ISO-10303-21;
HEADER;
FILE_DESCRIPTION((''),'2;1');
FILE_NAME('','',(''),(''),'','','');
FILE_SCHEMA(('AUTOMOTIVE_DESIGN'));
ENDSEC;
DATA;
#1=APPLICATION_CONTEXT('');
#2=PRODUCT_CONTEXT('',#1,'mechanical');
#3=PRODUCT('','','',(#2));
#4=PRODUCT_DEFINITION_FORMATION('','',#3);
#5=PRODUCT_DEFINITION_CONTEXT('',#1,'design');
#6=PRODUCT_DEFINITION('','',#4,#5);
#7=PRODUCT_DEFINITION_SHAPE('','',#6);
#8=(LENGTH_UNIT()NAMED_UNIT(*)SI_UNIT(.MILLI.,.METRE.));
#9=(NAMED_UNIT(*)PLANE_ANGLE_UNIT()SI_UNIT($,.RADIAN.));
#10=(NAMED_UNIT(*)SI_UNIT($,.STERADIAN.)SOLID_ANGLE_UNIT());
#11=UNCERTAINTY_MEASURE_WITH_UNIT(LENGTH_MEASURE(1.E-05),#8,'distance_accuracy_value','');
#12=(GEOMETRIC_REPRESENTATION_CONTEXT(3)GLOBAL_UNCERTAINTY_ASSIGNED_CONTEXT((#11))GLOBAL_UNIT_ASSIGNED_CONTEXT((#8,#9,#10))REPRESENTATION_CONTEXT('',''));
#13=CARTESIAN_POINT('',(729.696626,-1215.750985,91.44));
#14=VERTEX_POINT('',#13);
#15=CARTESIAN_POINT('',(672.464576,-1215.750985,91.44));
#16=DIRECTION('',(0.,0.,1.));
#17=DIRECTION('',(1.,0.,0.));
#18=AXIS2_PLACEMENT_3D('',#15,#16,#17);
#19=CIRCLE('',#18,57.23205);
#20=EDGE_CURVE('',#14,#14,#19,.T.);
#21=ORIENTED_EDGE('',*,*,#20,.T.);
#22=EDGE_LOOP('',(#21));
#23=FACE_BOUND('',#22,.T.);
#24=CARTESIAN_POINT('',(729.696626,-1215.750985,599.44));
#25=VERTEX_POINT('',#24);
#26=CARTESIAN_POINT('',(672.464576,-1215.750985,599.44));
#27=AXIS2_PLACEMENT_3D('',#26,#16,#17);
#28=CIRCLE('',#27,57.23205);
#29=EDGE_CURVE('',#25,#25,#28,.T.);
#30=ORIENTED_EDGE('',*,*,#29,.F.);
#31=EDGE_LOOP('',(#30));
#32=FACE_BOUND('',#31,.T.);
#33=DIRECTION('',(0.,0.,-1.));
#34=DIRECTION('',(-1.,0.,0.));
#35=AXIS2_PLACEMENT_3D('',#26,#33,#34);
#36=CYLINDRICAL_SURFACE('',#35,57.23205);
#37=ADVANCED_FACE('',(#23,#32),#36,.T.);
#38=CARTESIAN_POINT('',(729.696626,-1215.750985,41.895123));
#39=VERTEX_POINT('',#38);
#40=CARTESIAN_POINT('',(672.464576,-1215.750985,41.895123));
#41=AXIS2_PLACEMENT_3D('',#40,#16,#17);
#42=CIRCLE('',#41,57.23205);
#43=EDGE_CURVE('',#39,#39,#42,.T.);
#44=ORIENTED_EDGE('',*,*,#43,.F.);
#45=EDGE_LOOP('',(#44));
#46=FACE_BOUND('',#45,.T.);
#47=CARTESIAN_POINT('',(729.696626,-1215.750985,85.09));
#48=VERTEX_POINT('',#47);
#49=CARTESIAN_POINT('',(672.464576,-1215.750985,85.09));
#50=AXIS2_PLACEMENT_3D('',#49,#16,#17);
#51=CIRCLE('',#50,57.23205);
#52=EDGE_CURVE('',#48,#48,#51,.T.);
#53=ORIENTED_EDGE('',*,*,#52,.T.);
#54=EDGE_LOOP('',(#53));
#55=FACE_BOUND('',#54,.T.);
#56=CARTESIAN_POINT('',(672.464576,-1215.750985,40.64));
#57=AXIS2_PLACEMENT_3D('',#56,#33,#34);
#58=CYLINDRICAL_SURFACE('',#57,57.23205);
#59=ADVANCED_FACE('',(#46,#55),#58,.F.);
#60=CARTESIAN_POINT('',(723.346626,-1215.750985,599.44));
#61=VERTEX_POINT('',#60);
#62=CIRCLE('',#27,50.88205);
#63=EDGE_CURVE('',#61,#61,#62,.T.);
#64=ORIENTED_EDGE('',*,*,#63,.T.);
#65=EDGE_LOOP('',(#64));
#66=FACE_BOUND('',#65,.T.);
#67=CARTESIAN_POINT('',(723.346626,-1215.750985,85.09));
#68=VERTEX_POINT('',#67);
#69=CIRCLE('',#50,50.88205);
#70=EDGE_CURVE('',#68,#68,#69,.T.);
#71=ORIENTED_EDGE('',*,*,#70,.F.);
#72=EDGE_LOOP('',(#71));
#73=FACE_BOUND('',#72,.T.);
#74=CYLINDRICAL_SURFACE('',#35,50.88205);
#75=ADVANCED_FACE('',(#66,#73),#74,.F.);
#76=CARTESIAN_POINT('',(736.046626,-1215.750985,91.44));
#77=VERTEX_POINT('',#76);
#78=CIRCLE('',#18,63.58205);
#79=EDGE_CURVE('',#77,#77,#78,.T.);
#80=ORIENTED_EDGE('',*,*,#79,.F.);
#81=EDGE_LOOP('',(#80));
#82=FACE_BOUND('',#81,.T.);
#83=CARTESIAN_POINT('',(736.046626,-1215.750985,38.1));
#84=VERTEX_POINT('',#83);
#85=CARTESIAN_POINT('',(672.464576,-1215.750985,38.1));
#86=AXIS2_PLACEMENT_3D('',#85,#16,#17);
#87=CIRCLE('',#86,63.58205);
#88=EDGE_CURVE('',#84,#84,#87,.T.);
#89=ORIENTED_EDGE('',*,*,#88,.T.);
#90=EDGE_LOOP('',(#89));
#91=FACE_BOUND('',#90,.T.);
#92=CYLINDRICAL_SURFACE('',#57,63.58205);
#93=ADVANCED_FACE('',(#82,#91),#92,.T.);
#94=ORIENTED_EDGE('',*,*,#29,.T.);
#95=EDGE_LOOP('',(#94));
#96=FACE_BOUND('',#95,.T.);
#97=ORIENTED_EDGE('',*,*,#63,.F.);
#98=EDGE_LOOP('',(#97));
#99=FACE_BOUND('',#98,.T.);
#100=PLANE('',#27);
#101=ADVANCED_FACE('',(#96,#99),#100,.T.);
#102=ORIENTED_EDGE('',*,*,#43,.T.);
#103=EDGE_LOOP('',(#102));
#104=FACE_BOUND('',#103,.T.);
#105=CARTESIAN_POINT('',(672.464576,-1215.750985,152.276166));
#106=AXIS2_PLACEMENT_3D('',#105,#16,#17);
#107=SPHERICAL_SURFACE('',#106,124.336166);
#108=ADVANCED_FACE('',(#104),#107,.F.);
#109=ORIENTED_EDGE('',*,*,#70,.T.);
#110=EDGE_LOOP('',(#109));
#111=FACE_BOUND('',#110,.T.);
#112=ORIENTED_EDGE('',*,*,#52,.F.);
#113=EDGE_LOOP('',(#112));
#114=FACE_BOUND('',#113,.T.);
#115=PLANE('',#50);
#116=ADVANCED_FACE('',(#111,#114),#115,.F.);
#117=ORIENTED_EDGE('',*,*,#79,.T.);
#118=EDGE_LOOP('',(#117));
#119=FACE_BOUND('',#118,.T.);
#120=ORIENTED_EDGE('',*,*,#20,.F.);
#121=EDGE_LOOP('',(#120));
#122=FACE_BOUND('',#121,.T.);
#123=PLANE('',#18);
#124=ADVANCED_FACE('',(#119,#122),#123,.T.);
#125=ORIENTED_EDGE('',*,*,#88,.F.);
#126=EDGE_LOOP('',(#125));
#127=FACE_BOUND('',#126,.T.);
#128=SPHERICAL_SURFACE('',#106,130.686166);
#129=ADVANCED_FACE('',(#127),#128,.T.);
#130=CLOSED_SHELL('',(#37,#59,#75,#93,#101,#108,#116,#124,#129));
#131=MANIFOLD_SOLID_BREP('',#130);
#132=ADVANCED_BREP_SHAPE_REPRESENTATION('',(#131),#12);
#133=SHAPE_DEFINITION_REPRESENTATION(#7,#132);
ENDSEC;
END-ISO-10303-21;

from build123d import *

# Parameters (mm, degrees)
SKETCH2_R           = 63.582050125
BOSS_EXTRUDE1_DEPTH = 2.54
DOME1_FACE_RADIUS   = 63.582050125
DOME1_HEIGHT        = 16.51
SKETCH3_R           = 63.582050125
SKETCH3_R_2         = 57.232050125
BOSS_EXTRUDE2_DEPTH = 50.8
SKETCH4_R           = 57.232050125
SKETCH4_R_2         = 50.882050125
BOSS_EXTRUDE3_DEPTH = 558.8
SKETCH5_R           = 50.882050125
BOSS_EXTRUDE4_DEPTH = 558.8


# Read off the part's stored shape, not the designer's step: Shell1
with BuildPart() as part:
    # Sketch2 → Boss-Extrude1 (new body)
    with BuildSketch(Plane.XY.offset(38.1)):
        with Locations((672.464575935, -1215.750984812)):
            Circle(SKETCH2_R)
    extrude(amount=BOSS_EXTRUDE1_DEPTH)

    # Dome1: a dome of height H over a round flat face of radius A is a cap of a sphere of radius (A * A + H * H) / (2 * H)
    dome1_r = (DOME1_FACE_RADIUS * DOME1_FACE_RADIUS + DOME1_HEIGHT * DOME1_HEIGHT) / (2 * DOME1_HEIGHT)
    dome1_base = Plane((672.464575935, -1215.750984812, 38.1), z_dir=(0, 0, -1))
    with Locations(dome1_base.offset(DOME1_HEIGHT - dome1_r)):
        dome1_ball = Sphere(dome1_r, mode=Mode.PRIVATE)
    add(split(dome1_ball, bisect_by=dome1_base, keep=Keep.TOP, mode=Mode.PRIVATE))

    # Sketch3 → Boss-Extrude2 (add)
    with BuildSketch(Plane.XY.offset(40.64)):
        with Locations((672.464575935, -1215.750984812)):
            Circle(SKETCH3_R)
        with Locations((672.464575935, -1215.750984812)):
            Circle(SKETCH3_R_2, mode=Mode.SUBTRACT)
    extrude(amount=BOSS_EXTRUDE2_DEPTH)

    # Sketch4 → Boss-Extrude3 (add)
    with BuildSketch(Plane.XY.offset(40.64)):
        with Locations((672.464575935, -1215.750984812)):
            Circle(SKETCH4_R)
        with Locations((672.464575935, -1215.750984812)):
            Circle(SKETCH4_R_2, mode=Mode.SUBTRACT)
    extrude(amount=BOSS_EXTRUDE3_DEPTH)

    # Sketch5 → Boss-Extrude4 (add)
    with BuildSketch(Plane.XY.offset(40.64)):
        with Locations((672.464575935, -1215.750984812)):
            Circle(SKETCH5_R)
    extrude(amount=BOSS_EXTRUDE4_DEPTH)

    # Shell1 outline → Shell1 (revolve, cut)
    with BuildSketch(Plane(origin=(672.464575935, -1215.750984812, 0), x_dir=(1, 0, 0), z_dir=(0, -1, 0))):
        with BuildLine():
            Line((57.232050162, 41.895123211), (57.232050125, 85.09))
            Line((57.232050125, 85.09), (50.882050125, 85.09))
            Line((50.882050125, 85.09), (50.882050125, 599.44))
            Line((50.882050125, 599.44), (0, 599.44))
            Line((0, 599.44), (0, 27.94))
            ThreePointArc((0, 27.94), (29.454426788, 31.47915065), (57.232050162, 41.895123211))
        make_face()
    revolve(axis=Axis((672.464575935, -1215.750984812, 0), (0, 0, 1)), mode=Mode.SUBTRACT)


solid = part.part
